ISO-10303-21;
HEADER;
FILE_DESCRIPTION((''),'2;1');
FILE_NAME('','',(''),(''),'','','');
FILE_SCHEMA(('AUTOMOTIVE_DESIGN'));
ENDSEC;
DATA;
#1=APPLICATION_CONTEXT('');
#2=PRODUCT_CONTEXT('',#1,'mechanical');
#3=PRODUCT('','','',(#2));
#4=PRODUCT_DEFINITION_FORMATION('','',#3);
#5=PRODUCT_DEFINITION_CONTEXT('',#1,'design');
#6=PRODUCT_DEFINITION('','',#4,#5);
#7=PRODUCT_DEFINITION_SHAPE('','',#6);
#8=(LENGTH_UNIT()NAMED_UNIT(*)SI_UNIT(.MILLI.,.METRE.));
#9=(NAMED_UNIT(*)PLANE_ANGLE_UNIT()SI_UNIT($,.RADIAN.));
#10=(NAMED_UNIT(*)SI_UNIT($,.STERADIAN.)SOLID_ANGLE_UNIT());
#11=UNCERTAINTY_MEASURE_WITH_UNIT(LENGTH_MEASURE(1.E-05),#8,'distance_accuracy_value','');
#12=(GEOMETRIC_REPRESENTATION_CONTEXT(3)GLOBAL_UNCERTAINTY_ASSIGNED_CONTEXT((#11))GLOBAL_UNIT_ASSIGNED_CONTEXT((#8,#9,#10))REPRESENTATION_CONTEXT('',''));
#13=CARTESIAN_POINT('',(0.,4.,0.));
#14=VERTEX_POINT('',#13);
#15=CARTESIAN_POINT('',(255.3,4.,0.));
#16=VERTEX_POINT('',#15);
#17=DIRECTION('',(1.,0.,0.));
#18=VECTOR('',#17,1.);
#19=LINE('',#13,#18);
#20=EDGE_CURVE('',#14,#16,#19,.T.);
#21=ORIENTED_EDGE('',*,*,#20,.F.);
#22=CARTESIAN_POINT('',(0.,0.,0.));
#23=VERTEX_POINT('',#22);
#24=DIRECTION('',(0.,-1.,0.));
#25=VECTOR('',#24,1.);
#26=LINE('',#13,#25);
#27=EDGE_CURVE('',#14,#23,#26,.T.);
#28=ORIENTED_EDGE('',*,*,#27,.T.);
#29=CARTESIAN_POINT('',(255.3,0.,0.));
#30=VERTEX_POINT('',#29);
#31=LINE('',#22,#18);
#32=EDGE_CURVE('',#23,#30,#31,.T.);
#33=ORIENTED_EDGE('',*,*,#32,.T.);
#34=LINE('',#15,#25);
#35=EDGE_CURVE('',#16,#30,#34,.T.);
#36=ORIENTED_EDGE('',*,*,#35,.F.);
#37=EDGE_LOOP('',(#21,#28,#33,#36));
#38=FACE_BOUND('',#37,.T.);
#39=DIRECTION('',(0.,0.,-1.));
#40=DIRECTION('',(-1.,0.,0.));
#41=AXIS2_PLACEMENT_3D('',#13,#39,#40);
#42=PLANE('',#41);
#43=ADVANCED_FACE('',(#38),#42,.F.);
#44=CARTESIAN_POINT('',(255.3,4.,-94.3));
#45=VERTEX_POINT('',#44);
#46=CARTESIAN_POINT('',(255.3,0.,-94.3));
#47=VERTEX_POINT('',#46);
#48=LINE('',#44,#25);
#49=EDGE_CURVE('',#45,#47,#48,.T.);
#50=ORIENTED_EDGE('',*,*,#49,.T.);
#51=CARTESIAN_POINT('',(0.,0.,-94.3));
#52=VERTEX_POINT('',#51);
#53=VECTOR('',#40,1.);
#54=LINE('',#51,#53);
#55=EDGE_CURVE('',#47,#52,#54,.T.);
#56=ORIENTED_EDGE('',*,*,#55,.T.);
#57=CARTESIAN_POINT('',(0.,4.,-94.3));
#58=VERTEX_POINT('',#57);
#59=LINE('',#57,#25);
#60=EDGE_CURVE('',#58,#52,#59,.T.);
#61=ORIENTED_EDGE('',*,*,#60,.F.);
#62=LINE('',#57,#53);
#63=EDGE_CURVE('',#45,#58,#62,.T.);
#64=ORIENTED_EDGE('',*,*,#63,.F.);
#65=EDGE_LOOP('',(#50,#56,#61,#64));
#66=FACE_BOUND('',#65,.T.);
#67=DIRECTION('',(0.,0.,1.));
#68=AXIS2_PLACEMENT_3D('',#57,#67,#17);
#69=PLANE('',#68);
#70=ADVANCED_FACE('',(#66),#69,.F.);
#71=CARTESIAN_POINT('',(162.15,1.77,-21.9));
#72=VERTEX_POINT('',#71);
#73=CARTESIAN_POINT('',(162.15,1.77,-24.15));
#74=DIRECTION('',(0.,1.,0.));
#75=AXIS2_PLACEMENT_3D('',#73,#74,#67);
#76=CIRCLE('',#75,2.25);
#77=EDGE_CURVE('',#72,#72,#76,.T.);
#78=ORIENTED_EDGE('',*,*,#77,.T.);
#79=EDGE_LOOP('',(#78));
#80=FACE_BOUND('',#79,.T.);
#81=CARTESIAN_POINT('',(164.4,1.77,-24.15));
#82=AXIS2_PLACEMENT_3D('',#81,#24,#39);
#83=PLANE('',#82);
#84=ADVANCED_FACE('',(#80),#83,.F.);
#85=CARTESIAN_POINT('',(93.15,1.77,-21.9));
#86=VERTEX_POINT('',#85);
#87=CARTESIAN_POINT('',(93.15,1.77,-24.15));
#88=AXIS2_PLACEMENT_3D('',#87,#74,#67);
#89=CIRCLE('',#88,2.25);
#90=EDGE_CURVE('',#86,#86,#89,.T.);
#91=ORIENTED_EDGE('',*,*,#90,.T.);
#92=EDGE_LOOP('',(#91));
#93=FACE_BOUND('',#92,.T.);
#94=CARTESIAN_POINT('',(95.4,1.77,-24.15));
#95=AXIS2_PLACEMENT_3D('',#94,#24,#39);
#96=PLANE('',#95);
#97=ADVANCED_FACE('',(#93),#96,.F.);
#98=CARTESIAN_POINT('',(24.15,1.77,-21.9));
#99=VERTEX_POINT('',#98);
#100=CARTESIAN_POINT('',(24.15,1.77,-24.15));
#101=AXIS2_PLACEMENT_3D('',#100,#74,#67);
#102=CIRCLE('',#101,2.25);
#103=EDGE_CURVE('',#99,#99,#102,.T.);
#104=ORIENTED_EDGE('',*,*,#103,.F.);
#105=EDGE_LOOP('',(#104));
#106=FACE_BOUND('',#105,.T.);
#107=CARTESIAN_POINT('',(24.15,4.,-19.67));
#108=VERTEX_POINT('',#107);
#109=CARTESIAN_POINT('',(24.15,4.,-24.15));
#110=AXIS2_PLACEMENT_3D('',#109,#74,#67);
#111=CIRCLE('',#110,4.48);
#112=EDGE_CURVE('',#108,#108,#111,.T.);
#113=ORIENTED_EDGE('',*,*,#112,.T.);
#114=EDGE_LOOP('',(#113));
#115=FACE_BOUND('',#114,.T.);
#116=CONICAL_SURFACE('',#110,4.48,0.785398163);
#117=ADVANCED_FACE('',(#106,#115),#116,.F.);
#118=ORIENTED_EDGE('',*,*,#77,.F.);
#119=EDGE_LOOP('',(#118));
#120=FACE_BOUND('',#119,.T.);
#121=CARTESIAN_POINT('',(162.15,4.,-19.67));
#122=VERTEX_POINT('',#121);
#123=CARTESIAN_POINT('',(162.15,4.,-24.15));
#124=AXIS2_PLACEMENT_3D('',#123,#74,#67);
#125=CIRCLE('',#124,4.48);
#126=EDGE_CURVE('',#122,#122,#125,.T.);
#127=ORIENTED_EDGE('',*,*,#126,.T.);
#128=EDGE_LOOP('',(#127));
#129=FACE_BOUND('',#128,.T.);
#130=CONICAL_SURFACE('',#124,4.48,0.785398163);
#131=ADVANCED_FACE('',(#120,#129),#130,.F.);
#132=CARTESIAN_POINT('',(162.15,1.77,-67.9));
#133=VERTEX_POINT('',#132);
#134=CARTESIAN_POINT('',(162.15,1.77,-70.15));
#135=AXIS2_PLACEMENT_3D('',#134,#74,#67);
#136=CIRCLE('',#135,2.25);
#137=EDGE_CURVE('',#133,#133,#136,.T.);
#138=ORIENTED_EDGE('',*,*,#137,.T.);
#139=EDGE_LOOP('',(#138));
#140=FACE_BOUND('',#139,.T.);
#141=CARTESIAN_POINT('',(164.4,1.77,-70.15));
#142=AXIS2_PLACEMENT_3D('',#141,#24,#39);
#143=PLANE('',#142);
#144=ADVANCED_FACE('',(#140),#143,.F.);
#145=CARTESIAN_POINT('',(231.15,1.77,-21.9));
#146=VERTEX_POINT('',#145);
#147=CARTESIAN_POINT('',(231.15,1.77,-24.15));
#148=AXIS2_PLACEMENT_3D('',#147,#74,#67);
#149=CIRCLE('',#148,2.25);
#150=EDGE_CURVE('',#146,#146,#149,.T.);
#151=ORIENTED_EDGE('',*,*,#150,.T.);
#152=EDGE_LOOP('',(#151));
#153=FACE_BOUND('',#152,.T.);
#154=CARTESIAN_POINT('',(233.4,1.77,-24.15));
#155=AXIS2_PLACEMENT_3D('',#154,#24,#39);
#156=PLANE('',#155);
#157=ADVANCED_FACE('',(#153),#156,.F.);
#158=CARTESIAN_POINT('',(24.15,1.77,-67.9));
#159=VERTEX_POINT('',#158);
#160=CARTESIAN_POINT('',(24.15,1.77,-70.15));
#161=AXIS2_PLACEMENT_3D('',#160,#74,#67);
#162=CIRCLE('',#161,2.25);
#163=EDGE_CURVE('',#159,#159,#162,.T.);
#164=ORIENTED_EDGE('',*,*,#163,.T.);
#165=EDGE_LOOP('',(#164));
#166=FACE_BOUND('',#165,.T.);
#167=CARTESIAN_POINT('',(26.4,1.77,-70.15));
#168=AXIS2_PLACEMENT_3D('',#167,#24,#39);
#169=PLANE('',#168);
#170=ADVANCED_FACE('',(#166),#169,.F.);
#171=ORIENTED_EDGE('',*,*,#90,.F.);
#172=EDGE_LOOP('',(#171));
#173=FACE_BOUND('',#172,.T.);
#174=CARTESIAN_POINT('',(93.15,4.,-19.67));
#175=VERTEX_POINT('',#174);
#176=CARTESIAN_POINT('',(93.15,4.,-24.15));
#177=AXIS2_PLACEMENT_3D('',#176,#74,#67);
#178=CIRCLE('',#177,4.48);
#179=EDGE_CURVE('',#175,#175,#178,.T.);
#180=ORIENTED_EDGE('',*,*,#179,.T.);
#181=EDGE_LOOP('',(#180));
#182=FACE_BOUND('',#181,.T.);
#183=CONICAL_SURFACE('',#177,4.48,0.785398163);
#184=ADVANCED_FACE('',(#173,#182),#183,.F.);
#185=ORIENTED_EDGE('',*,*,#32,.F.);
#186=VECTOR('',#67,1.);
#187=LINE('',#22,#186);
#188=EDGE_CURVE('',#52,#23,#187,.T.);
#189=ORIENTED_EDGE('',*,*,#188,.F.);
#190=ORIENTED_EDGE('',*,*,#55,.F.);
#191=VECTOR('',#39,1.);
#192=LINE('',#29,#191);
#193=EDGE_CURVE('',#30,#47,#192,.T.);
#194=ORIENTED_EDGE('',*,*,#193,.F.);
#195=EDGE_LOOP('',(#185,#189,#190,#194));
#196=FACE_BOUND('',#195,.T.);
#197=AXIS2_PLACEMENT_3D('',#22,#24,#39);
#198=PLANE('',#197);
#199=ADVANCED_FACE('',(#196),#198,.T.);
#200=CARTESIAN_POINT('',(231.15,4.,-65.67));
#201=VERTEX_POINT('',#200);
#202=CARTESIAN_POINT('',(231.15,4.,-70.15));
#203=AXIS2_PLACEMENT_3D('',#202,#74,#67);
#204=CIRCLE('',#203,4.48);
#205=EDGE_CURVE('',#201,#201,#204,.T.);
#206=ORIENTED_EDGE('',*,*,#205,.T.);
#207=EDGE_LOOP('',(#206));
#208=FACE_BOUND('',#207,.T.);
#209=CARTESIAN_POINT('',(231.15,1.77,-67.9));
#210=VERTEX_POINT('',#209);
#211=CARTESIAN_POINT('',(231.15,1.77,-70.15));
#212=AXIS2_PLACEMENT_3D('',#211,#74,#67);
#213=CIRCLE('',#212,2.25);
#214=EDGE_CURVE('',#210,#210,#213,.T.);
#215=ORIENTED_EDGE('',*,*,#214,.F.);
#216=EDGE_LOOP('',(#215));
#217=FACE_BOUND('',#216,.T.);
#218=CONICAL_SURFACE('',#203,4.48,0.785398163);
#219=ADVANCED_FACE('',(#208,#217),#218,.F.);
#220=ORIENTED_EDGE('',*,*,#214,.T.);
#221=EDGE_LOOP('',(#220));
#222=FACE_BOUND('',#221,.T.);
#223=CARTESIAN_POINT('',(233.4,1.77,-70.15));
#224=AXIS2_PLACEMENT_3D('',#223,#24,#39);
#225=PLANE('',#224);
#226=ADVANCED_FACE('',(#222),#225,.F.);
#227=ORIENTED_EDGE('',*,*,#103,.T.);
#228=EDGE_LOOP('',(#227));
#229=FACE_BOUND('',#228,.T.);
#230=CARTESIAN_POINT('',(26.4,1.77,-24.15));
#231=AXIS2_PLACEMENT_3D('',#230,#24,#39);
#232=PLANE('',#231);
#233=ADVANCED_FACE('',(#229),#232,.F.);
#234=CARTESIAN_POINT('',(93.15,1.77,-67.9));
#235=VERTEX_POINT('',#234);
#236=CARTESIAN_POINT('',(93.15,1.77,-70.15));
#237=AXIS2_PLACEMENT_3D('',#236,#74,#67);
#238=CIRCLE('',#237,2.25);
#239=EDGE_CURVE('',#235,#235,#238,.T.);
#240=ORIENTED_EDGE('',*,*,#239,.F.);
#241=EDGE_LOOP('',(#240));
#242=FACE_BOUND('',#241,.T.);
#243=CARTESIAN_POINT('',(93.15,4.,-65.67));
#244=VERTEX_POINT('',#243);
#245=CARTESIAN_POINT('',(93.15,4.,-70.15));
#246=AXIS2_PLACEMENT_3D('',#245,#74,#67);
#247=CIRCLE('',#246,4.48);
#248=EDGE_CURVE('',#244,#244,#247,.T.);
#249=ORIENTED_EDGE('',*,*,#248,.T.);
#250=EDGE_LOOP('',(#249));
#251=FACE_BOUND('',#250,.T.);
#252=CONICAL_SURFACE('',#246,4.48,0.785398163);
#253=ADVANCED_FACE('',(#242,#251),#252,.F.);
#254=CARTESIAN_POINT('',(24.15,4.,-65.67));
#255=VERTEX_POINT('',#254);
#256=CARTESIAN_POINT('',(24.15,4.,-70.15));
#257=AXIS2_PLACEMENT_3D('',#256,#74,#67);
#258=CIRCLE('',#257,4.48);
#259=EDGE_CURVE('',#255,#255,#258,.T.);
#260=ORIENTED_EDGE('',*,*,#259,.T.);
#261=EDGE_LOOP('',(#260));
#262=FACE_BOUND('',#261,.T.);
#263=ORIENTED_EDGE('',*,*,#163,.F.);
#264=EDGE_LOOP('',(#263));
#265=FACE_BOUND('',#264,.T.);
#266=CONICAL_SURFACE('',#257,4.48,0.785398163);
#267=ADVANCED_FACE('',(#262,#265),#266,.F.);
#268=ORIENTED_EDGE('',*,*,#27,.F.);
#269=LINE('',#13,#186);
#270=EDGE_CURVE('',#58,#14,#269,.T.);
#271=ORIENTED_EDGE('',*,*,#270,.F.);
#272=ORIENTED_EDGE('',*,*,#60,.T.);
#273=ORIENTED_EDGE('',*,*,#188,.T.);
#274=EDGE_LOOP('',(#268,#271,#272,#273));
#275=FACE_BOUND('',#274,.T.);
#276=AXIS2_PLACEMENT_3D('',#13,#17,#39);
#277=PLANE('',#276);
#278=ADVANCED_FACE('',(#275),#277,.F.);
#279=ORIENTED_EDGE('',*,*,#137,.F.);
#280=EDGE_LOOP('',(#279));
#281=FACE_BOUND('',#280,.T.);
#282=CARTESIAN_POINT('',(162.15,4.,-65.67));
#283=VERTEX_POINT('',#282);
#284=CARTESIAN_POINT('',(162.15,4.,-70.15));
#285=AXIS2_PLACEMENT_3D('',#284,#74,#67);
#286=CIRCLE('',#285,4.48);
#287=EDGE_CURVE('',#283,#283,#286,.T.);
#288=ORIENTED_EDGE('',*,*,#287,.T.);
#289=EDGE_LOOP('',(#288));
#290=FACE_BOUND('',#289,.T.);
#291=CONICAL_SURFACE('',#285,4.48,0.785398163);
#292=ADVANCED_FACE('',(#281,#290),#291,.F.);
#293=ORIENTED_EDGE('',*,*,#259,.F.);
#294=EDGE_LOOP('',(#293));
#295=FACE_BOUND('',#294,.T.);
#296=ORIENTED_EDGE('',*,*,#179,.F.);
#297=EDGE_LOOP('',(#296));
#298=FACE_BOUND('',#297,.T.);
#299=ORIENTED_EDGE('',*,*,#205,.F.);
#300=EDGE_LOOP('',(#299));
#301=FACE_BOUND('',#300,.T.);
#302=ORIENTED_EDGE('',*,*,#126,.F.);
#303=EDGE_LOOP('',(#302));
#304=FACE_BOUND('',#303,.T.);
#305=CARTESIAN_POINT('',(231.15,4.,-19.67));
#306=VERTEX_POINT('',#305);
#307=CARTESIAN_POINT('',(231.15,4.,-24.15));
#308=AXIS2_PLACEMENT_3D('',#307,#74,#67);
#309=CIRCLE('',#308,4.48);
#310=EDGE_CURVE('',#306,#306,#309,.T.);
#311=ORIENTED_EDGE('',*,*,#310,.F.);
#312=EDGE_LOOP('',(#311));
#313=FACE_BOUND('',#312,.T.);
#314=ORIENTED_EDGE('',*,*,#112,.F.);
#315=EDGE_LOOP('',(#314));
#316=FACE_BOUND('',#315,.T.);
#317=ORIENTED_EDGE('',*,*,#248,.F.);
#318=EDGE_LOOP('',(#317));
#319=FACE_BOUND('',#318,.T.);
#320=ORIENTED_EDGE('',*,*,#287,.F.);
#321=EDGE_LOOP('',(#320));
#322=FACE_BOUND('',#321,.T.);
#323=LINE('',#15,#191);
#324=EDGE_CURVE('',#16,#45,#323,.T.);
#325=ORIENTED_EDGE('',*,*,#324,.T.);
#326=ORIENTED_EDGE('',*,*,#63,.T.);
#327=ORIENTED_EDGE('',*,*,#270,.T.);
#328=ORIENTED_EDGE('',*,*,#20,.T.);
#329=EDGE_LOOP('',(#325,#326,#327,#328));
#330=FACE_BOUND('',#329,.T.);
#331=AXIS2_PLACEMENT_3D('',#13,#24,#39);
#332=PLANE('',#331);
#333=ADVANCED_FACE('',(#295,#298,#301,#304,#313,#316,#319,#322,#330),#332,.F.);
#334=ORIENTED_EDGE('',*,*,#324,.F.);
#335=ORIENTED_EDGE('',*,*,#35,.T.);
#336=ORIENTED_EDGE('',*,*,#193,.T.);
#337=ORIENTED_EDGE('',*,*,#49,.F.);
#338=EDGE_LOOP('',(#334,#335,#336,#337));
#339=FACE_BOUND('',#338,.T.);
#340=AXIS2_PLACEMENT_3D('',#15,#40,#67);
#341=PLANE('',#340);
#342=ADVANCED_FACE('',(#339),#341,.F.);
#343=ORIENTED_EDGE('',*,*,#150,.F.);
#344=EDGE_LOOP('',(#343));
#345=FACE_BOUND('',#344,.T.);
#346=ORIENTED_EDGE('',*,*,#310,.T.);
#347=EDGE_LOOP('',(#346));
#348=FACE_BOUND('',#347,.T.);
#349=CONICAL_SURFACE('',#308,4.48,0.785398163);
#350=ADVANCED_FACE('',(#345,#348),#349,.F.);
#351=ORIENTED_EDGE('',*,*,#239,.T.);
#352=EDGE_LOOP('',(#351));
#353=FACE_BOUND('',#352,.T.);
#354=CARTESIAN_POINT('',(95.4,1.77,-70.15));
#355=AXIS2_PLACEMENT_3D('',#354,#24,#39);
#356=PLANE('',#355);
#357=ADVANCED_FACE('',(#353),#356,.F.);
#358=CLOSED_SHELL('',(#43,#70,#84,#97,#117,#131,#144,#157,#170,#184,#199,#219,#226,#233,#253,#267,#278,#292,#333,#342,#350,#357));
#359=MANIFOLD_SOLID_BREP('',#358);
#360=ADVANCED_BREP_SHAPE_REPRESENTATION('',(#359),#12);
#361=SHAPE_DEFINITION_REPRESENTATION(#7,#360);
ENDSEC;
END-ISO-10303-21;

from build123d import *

# Parameters (mm, degrees)
SKETCH1_W                 = 255.3
SKETCH1_H                 = 94.3
BOSS_EXTRUDE1_DEPTH       = 4
ADVANCEDHOLE2_OUTLINE_R   = 2.25
ADVANCEDHOLE2_DEPTH       = 2.23
ADVANCEDHOLE2_DRAFT       = -45
ADVANCEDHOLE2_2_OUTLINE_R = 2.25
ADVANCEDHOLE2_2_DEPTH     = 2.23
ADVANCEDHOLE2_2_DRAFT     = -45
ADVANCEDHOLE2_3_OUTLINE_R = 2.25
ADVANCEDHOLE2_3_DEPTH     = 2.23
ADVANCEDHOLE2_3_DRAFT     = -45
ADVANCEDHOLE2_4_OUTLINE_R = 2.25
ADVANCEDHOLE2_4_DEPTH     = 2.23
ADVANCEDHOLE2_4_DRAFT     = -45
ADVANCEDHOLE2_5_OUTLINE_R = 2.25
ADVANCEDHOLE2_5_DEPTH     = 2.23
ADVANCEDHOLE2_5_DRAFT     = -45
ADVANCEDHOLE2_6_OUTLINE_R = 2.25
ADVANCEDHOLE2_6_DEPTH     = 2.23
ADVANCEDHOLE2_6_DRAFT     = -45
ADVANCEDHOLE2_7_OUTLINE_R = 2.25
ADVANCEDHOLE2_7_DEPTH     = 2.23
ADVANCEDHOLE2_7_DRAFT     = -45
ADVANCEDHOLE2_8_OUTLINE_R = 2.25
ADVANCEDHOLE2_8_DEPTH     = 2.23
ADVANCEDHOLE2_8_DRAFT     = -45


# Read off the part's stored shape, not the designer's step: AdvancedHole2
with BuildPart() as part:
    # Sketch1 → Boss-Extrude1 (new body)
    with BuildSketch(Plane(origin=(0, 0, 0), x_dir=(1, 0, 0), z_dir=(0, 1, 0))):
        with Locations((127.65, 47.15)):
            Rectangle(SKETCH1_W, SKETCH1_H)
    extrude(amount=BOSS_EXTRUDE1_DEPTH)


with BuildPart() as advancedhole2_tool:
    # AdvancedHole2 outline → AdvancedHole2 (with draft: the straight prism first)
    with BuildSketch(Plane(origin=(0, 1.77, 0), x_dir=(1, 0, 0), z_dir=(0, 1, 0))):
        with Locations((231.15, 24.15)):
            Circle(ADVANCEDHOLE2_OUTLINE_R)
    extrude(amount=ADVANCEDHOLE2_DEPTH)
    # AdvancedHole2: the draft: its side faces are tilted about the plane it starts from
    advancedhole2_sides = [advancedhole2_tool.faces().sort_by_distance(p)[0] for p in [
        (228.9, 2.885, -24.15),
    ]]
    draft(advancedhole2_sides, Plane(origin=(0, 1.77, 0), x_dir=(1, 0, 0), z_dir=(0, 1, 0)), ADVANCEDHOLE2_DRAFT)


with BuildPart() as part_1:
    add(part.part)

    # AdvancedHole2: cut by advancedhole2_tool
    add(advancedhole2_tool.part, mode=Mode.SUBTRACT)


with BuildPart() as advancedhole2_2_tool:
    # AdvancedHole2 2 outline → AdvancedHole2 2 (with draft: the straight prism first)
    with BuildSketch(Plane(origin=(0, 1.77, 0), x_dir=(1, 0, 0), z_dir=(0, 1, 0))):
        with Locations((231.15, 70.15)):
            Circle(ADVANCEDHOLE2_2_OUTLINE_R)
    extrude(amount=ADVANCEDHOLE2_2_DEPTH)
    # AdvancedHole2 2: the draft: its side faces are tilted about the plane it starts from
    advancedhole2_2_sides = [advancedhole2_2_tool.faces().sort_by_distance(p)[0] for p in [
        (228.9, 2.885, -70.15),
    ]]
    draft(advancedhole2_2_sides, Plane(origin=(0, 1.77, 0), x_dir=(1, 0, 0), z_dir=(0, 1, 0)), ADVANCEDHOLE2_2_DRAFT)


with BuildPart() as part_2:
    add(part_1.part)

    # AdvancedHole2 2: cut by advancedhole2_2_tool
    add(advancedhole2_2_tool.part, mode=Mode.SUBTRACT)


with BuildPart() as advancedhole2_3_tool:
    # AdvancedHole2 3 outline → AdvancedHole2 3 (with draft: the straight prism first)
    with BuildSketch(Plane(origin=(0, 1.77, 0), x_dir=(1, 0, 0), z_dir=(0, 1, 0))):
        with Locations((162.15, 70.15)):
            Circle(ADVANCEDHOLE2_3_OUTLINE_R)
    extrude(amount=ADVANCEDHOLE2_3_DEPTH)
    # AdvancedHole2 3: the draft: its side faces are tilted about the plane it starts from
    advancedhole2_3_sides = [advancedhole2_3_tool.faces().sort_by_distance(p)[0] for p in [
        (159.9, 2.885, -70.15),
    ]]
    draft(advancedhole2_3_sides, Plane(origin=(0, 1.77, 0), x_dir=(1, 0, 0), z_dir=(0, 1, 0)), ADVANCEDHOLE2_3_DRAFT)


with BuildPart() as part_3:
    add(part_2.part)

    # AdvancedHole2 3: cut by advancedhole2_3_tool
    add(advancedhole2_3_tool.part, mode=Mode.SUBTRACT)


with BuildPart() as advancedhole2_4_tool:
    # AdvancedHole2 4 outline → AdvancedHole2 4 (with draft: the straight prism first)
    with BuildSketch(Plane(origin=(0, 1.77, 0), x_dir=(1, 0, 0), z_dir=(0, 1, 0))):
        with Locations((162.15, 24.15)):
            Circle(ADVANCEDHOLE2_4_OUTLINE_R)
    extrude(amount=ADVANCEDHOLE2_4_DEPTH)
    # AdvancedHole2 4: the draft: its side faces are tilted about the plane it starts from
    advancedhole2_4_sides = [advancedhole2_4_tool.faces().sort_by_distance(p)[0] for p in [
        (159.9, 2.885, -24.15),
    ]]
    draft(advancedhole2_4_sides, Plane(origin=(0, 1.77, 0), x_dir=(1, 0, 0), z_dir=(0, 1, 0)), ADVANCEDHOLE2_4_DRAFT)


with BuildPart() as part_4:
    add(part_3.part)

    # AdvancedHole2 4: cut by advancedhole2_4_tool
    add(advancedhole2_4_tool.part, mode=Mode.SUBTRACT)


with BuildPart() as advancedhole2_5_tool:
    # AdvancedHole2 5 outline → AdvancedHole2 5 (with draft: the straight prism first)
    with BuildSketch(Plane(origin=(0, 1.77, 0), x_dir=(1, 0, 0), z_dir=(0, 1, 0))):
        with Locations((93.15, 24.15)):
            Circle(ADVANCEDHOLE2_5_OUTLINE_R)
    extrude(amount=ADVANCEDHOLE2_5_DEPTH)
    # AdvancedHole2 5: the draft: its side faces are tilted about the plane it starts from
    advancedhole2_5_sides = [advancedhole2_5_tool.faces().sort_by_distance(p)[0] for p in [
        (90.9, 2.885, -24.15),
    ]]
    draft(advancedhole2_5_sides, Plane(origin=(0, 1.77, 0), x_dir=(1, 0, 0), z_dir=(0, 1, 0)), ADVANCEDHOLE2_5_DRAFT)


with BuildPart() as part_5:
    add(part_4.part)

    # AdvancedHole2 5: cut by advancedhole2_5_tool
    add(advancedhole2_5_tool.part, mode=Mode.SUBTRACT)


with BuildPart() as advancedhole2_6_tool:
    # AdvancedHole2 6 outline → AdvancedHole2 6 (with draft: the straight prism first)
    with BuildSketch(Plane(origin=(0, 1.77, 0), x_dir=(1, 0, 0), z_dir=(0, 1, 0))):
        with Locations((93.15, 70.15)):
            Circle(ADVANCEDHOLE2_6_OUTLINE_R)
    extrude(amount=ADVANCEDHOLE2_6_DEPTH)
    # AdvancedHole2 6: the draft: its side faces are tilted about the plane it starts from
    advancedhole2_6_sides = [advancedhole2_6_tool.faces().sort_by_distance(p)[0] for p in [
        (90.9, 2.885, -70.15),
    ]]
    draft(advancedhole2_6_sides, Plane(origin=(0, 1.77, 0), x_dir=(1, 0, 0), z_dir=(0, 1, 0)), ADVANCEDHOLE2_6_DRAFT)


with BuildPart() as part_6:
    add(part_5.part)

    # AdvancedHole2 6: cut by advancedhole2_6_tool
    add(advancedhole2_6_tool.part, mode=Mode.SUBTRACT)


with BuildPart() as advancedhole2_7_tool:
    # AdvancedHole2 7 outline → AdvancedHole2 7 (with draft: the straight prism first)
    with BuildSketch(Plane(origin=(0, 1.77, 0), x_dir=(1, 0, 0), z_dir=(0, 1, 0))):
        with Locations((24.15, 24.15)):
            Circle(ADVANCEDHOLE2_7_OUTLINE_R)
    extrude(amount=ADVANCEDHOLE2_7_DEPTH)
    # AdvancedHole2 7: the draft: its side faces are tilted about the plane it starts from
    advancedhole2_7_sides = [advancedhole2_7_tool.faces().sort_by_distance(p)[0] for p in [
        (21.9, 2.885, -24.15),
    ]]
    draft(advancedhole2_7_sides, Plane(origin=(0, 1.77, 0), x_dir=(1, 0, 0), z_dir=(0, 1, 0)), ADVANCEDHOLE2_7_DRAFT)


with BuildPart() as part_7:
    add(part_6.part)

    # AdvancedHole2 7: cut by advancedhole2_7_tool
    add(advancedhole2_7_tool.part, mode=Mode.SUBTRACT)


with BuildPart() as advancedhole2_8_tool:
    # AdvancedHole2 8 outline → AdvancedHole2 8 (with draft: the straight prism first)
    with BuildSketch(Plane(origin=(0, 1.77, 0), x_dir=(1, 0, 0), z_dir=(0, 1, 0))):
        with Locations((24.15, 70.15)):
            Circle(ADVANCEDHOLE2_8_OUTLINE_R)
    extrude(amount=ADVANCEDHOLE2_8_DEPTH)
    # AdvancedHole2 8: the draft: its side faces are tilted about the plane it starts from
    advancedhole2_8_sides = [advancedhole2_8_tool.faces().sort_by_distance(p)[0] for p in [
        (21.9, 2.885, -70.15),
    ]]
    draft(advancedhole2_8_sides, Plane(origin=(0, 1.77, 0), x_dir=(1, 0, 0), z_dir=(0, 1, 0)), ADVANCEDHOLE2_8_DRAFT)


with BuildPart() as part_8:
    add(part_7.part)

    # AdvancedHole2 8: cut by advancedhole2_8_tool
    add(advancedhole2_8_tool.part, mode=Mode.SUBTRACT)


solid = part_8.part
